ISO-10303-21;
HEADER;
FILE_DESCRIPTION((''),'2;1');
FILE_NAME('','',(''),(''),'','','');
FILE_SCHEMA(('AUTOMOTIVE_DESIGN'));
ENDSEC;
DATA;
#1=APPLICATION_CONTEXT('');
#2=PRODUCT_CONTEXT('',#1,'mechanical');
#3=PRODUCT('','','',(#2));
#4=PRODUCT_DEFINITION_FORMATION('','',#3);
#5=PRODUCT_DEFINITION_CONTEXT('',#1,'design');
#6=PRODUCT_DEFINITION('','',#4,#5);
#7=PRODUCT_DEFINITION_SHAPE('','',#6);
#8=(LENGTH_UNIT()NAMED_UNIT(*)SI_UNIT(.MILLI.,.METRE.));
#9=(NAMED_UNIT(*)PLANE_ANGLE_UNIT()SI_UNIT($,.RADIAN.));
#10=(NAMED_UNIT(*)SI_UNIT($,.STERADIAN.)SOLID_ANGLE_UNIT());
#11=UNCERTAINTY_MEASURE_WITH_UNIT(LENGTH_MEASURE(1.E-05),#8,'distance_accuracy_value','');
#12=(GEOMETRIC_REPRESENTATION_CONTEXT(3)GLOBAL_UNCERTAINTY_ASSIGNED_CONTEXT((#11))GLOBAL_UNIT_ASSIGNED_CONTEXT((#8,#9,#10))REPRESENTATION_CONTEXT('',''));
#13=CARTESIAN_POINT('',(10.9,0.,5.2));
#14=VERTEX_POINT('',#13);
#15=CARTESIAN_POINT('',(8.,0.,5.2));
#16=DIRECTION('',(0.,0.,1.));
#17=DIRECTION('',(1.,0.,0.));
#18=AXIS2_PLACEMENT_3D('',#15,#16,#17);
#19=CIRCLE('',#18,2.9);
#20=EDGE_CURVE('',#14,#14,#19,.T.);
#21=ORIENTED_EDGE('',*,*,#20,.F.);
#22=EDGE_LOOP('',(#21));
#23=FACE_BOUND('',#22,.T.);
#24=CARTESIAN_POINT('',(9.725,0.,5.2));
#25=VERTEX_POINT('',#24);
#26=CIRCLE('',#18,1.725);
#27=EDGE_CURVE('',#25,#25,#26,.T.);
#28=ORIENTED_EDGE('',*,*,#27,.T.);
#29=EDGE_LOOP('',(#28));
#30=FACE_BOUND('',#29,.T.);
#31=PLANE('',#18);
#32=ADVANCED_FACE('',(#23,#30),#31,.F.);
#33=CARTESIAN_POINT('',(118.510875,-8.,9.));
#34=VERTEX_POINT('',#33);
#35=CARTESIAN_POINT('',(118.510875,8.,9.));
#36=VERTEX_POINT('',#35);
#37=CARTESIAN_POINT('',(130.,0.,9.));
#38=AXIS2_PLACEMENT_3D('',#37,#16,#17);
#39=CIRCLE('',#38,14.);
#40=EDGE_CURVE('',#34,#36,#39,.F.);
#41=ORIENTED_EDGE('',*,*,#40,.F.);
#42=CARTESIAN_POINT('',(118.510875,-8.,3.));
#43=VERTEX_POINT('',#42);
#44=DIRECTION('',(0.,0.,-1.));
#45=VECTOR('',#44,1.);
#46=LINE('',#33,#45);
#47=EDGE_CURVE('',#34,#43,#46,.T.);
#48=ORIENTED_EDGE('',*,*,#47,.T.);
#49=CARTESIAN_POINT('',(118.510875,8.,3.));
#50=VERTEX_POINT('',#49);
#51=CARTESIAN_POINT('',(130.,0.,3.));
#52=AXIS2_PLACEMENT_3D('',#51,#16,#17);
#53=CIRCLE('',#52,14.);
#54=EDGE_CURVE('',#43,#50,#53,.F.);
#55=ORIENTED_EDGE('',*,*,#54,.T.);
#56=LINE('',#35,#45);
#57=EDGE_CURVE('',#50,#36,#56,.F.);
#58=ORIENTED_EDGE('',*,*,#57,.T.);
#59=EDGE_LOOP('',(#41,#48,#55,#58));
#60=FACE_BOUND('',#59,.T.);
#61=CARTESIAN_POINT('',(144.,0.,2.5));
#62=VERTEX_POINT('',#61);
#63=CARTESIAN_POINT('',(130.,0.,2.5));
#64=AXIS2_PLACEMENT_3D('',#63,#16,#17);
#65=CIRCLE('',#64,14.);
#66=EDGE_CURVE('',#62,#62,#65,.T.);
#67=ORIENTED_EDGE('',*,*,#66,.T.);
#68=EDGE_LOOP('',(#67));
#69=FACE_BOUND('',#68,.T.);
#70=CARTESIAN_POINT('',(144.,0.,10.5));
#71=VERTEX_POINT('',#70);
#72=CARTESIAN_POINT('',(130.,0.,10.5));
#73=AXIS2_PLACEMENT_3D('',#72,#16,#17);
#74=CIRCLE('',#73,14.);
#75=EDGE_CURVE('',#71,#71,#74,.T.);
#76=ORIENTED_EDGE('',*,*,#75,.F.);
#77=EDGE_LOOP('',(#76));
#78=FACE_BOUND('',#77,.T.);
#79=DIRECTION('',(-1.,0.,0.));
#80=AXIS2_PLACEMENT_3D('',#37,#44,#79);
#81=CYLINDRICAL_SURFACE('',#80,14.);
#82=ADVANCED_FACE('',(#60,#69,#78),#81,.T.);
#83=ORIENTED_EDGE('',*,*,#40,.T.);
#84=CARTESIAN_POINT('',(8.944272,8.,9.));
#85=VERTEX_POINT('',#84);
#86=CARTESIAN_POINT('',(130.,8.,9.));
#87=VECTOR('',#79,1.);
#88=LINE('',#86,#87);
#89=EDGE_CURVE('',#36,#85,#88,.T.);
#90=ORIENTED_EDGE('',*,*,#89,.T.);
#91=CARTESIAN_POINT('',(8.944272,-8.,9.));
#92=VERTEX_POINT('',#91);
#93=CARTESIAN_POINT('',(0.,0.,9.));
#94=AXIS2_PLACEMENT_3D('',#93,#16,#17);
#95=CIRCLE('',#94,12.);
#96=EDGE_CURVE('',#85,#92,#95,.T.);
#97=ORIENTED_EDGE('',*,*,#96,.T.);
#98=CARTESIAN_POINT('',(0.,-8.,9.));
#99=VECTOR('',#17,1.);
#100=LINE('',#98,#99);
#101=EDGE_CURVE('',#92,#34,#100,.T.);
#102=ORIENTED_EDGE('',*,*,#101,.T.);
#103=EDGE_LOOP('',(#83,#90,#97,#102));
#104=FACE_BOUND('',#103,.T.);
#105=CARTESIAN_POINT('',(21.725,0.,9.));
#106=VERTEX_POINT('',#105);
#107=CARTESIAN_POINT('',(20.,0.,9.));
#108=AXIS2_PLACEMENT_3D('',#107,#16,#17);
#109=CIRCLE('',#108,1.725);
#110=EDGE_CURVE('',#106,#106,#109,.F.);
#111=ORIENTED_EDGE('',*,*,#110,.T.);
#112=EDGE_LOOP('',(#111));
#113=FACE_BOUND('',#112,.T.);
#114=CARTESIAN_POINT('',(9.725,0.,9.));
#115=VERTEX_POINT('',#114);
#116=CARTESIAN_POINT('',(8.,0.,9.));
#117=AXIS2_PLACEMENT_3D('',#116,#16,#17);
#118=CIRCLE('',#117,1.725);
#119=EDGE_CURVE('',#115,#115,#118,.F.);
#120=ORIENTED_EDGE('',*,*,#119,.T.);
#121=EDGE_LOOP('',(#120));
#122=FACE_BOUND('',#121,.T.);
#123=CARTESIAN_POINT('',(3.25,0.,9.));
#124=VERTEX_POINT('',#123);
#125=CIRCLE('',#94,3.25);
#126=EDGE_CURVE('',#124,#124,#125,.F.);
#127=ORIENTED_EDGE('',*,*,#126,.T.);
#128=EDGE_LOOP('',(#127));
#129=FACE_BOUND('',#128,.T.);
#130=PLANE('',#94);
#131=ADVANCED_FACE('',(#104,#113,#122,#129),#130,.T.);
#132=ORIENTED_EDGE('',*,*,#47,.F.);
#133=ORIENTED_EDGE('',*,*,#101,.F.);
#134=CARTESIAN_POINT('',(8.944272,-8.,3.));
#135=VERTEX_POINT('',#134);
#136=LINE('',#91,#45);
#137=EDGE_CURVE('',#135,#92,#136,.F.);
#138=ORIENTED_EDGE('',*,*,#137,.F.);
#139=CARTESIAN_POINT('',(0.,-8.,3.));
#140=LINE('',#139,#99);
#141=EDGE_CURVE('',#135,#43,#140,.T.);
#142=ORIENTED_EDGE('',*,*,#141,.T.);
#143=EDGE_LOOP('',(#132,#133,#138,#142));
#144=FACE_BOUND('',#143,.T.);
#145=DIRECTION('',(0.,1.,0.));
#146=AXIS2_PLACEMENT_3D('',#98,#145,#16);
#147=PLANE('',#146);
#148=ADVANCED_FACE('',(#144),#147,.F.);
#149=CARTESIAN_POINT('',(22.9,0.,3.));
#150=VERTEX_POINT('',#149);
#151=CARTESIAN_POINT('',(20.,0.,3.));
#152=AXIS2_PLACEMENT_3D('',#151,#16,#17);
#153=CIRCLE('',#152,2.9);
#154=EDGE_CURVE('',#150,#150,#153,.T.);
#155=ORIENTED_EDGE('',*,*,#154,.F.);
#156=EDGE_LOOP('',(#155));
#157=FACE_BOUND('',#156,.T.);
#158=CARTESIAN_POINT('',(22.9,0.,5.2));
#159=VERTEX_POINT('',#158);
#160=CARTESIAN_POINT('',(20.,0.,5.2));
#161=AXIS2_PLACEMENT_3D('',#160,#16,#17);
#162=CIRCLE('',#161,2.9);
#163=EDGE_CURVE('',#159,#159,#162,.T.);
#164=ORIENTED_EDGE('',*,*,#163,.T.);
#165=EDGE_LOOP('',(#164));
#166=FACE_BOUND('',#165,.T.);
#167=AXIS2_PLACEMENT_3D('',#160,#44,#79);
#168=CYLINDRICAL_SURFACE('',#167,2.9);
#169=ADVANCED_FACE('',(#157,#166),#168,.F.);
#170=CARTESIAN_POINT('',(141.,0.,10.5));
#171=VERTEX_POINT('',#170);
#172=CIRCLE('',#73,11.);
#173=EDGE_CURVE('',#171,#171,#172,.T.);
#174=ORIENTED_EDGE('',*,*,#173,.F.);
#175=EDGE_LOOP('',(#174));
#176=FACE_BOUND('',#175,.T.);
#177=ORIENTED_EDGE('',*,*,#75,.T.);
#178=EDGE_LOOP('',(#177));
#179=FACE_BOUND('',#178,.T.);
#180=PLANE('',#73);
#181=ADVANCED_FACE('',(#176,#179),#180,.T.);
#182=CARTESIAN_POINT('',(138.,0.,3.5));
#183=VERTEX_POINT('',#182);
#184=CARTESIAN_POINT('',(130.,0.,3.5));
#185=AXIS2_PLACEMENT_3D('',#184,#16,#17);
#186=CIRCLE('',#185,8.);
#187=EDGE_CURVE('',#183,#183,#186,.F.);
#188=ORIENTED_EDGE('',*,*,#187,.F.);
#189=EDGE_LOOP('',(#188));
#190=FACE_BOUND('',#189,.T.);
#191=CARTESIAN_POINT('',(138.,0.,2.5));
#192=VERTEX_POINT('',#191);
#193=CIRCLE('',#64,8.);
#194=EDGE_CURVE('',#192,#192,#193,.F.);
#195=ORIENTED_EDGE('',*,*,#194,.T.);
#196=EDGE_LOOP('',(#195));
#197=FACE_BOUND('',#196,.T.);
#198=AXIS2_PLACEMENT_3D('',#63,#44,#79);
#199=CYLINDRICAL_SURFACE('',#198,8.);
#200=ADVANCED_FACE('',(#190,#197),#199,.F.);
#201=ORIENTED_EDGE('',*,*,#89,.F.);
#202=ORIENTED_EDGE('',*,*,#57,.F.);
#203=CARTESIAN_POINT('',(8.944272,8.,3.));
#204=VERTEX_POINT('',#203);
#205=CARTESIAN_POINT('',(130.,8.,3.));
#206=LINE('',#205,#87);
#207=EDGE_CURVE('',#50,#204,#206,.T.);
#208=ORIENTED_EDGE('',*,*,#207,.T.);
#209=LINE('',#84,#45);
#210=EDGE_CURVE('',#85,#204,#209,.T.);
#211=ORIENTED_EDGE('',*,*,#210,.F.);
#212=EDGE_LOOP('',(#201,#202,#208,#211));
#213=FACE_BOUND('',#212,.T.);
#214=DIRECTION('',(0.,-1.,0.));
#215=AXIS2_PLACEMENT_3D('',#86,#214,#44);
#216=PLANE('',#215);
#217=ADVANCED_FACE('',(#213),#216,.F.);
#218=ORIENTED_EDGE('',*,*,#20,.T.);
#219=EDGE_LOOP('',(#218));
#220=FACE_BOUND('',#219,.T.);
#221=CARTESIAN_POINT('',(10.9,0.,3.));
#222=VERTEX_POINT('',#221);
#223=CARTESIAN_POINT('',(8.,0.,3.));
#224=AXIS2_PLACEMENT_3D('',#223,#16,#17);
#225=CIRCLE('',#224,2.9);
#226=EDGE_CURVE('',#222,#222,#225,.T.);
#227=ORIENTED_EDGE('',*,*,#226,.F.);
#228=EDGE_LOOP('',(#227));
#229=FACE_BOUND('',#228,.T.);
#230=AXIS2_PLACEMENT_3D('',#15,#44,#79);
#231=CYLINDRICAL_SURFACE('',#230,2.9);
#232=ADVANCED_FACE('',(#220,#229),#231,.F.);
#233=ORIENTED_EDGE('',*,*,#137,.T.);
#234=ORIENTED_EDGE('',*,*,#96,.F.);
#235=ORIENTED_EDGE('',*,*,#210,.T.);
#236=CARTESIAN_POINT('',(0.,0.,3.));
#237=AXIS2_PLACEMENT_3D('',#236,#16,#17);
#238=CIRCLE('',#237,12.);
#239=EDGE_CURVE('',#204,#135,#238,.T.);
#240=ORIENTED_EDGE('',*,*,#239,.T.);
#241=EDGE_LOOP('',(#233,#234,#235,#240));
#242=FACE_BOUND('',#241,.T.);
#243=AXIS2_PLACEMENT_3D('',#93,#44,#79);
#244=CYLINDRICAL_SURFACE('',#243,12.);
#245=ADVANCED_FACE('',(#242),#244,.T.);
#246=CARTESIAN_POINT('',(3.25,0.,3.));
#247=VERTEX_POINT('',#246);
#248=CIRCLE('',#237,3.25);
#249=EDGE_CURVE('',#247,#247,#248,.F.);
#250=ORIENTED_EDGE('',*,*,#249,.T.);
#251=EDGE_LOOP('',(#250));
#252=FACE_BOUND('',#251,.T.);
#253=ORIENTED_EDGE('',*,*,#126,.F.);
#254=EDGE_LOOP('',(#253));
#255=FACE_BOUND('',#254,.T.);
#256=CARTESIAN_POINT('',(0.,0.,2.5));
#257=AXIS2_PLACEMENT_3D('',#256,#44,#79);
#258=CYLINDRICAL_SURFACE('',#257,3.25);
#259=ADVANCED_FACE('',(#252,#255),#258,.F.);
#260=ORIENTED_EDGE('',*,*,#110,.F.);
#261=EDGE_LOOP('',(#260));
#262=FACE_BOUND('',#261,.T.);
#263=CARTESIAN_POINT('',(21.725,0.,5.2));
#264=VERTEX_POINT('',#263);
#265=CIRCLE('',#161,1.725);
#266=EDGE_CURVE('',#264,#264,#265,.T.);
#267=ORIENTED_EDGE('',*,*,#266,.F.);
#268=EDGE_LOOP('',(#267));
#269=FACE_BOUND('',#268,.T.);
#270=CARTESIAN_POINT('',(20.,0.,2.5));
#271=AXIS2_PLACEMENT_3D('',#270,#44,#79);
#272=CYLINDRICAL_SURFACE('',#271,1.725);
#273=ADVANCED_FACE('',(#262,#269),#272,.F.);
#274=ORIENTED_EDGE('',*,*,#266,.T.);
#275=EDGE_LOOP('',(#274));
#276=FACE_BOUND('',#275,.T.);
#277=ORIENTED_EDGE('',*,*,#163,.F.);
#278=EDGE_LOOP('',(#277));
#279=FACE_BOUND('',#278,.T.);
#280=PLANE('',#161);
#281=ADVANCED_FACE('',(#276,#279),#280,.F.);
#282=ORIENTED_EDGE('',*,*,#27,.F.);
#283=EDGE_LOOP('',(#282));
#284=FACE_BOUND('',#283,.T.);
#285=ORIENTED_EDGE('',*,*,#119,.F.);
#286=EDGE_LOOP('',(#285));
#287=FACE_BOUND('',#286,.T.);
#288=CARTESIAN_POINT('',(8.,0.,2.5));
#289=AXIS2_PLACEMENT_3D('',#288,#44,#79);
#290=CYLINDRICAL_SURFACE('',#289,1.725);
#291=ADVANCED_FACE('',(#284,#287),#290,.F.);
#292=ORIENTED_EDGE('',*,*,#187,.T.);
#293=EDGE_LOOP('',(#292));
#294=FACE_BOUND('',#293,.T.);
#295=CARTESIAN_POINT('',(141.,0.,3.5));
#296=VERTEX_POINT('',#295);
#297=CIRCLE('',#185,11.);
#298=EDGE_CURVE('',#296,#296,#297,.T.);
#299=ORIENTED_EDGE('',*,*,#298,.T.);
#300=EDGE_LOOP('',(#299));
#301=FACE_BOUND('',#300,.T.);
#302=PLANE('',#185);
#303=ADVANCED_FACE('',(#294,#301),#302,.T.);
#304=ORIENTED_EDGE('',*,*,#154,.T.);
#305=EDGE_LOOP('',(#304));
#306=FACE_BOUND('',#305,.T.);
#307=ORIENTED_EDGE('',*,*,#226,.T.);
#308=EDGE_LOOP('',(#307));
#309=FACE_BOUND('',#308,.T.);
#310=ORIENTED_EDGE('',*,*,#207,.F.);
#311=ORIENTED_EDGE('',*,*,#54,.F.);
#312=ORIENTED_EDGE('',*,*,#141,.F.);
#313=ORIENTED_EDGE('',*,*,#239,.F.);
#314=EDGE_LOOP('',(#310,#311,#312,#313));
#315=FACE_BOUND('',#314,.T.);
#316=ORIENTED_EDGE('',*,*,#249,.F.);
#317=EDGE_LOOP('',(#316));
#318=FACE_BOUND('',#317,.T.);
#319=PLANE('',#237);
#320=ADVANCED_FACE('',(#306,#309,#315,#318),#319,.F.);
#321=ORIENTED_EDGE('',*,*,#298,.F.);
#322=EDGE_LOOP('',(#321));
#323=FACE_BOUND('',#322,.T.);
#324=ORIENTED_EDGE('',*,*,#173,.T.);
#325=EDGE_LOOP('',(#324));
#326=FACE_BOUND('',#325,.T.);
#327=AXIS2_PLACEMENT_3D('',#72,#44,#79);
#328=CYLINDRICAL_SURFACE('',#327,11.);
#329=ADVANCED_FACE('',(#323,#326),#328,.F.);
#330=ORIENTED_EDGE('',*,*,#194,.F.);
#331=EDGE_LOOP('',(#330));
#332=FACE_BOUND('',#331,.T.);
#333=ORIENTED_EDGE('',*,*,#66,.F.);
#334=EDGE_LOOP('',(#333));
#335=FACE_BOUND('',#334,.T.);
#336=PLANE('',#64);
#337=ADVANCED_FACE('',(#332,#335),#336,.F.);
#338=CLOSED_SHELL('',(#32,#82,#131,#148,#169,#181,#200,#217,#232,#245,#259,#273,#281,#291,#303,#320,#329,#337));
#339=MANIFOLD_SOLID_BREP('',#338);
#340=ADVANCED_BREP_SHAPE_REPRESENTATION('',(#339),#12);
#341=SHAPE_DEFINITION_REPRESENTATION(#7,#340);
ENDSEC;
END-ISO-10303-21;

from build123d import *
from build123d.topology import SkipClean

# Parameters (mm, degrees)
BOSS_EXTRUDE1_START     = 3
SKETCH1_W               = 130
SKETCH1_H               = 16
BOSS_EXTRUDE1_DEPTH     = 6
BOSS_EXTRUDE2_START     = 3
SKETCH2_R               = 12
BOSS_EXTRUDE2_DEPTH     = 6
BOSS_EXTRUDE3_START     = 3
SKETCH3_R               = 14
BOSS_EXTRUDE3_DEPTH     = 6
BOSS_EXTRUDE4_START     = 2.5
SKETCH4_R               = 14
BOSS_EXTRUDE4_DEPTH     = 8
CUT_EXTRUDE1_DEPTH      = 146.059470563
CUT_EXTRUDE1_DEPTH_BACK = 146.059470563
SKETCH5_R               = 3.25
CUT_EXTRUDE2_DEPTH      = 146.059470563
CUT_EXTRUDE2_DEPTH_BACK = 146.059470563
SKETCH6_R               = 1.725
CUT_EXTRUDE3_START      = 3
SKETCH7_R               = 2.9
CUT_EXTRUDE3_DEPTH      = 2.2
CUT_EXTRUDE4_START      = 3
SKETCH8_R               = 2.9
CUT_EXTRUDE4_DEPTH      = 2.2
CUT_EXTRUDE5_START      = 3.5
SKETCH9_R               = 11
CUT_EXTRUDE5_DEPTH      = 7
CUT_EXTRUDE6_DEPTH      = 146.059470563
CUT_EXTRUDE6_DEPTH_BACK = 146.059470563
SKETCH10_R              = 8


with BuildPart() as part:
    # Sketch1 → Boss-Extrude1 (new body)
    with BuildSketch(Plane.XY.offset(BOSS_EXTRUDE1_START)):
        with Locations((65, 0)):
            Rectangle(SKETCH1_W, SKETCH1_H)
    extrude(amount=BOSS_EXTRUDE1_DEPTH)

    # Sketch2 → Boss-Extrude2 (add)
    with BuildSketch(Plane.XY.offset(BOSS_EXTRUDE2_START)):
        Circle(SKETCH2_R)
    extrude(amount=BOSS_EXTRUDE2_DEPTH)

    # Sketch3 → Boss-Extrude3 (add)
    with BuildSketch(Plane.XY.offset(BOSS_EXTRUDE3_START)):
        with Locations((130, 0)):
            Circle(SKETCH3_R)
    extrude(amount=BOSS_EXTRUDE3_DEPTH)

    # Sketch4 → Boss-Extrude4 (add)
    with SkipClean():  # the faces are left unmerged after this step: merging them gives an invalid solid
        with BuildSketch(Plane.XY.offset(BOSS_EXTRUDE4_START)):
            with Locations((130, 0)):
                Circle(SKETCH4_R)
        extrude(amount=BOSS_EXTRUDE4_DEPTH)
    add(part.part.scale(1), mode=Mode.REPLACE)  # the faces are merged on a copy

    # Sketch5 → Cut-Extrude1 (cut, two sides: drawn at the far end of the back side and taken through both)
    with BuildSketch(Plane.XY.offset(-CUT_EXTRUDE1_DEPTH_BACK)):
        Circle(SKETCH5_R)
    extrude(amount=CUT_EXTRUDE1_DEPTH + CUT_EXTRUDE1_DEPTH_BACK, mode=Mode.SUBTRACT)

    # Sketch6 → Cut-Extrude2 (cut, two sides: drawn at the far end of the back side and taken through both)
    with BuildSketch(Plane.XY.offset(-CUT_EXTRUDE2_DEPTH_BACK)):
        with Locations((8, 0)):
            Circle(SKETCH6_R)
        with Locations((20, 0)):
            Circle(SKETCH6_R)
    extrude(amount=CUT_EXTRUDE2_DEPTH + CUT_EXTRUDE2_DEPTH_BACK, mode=Mode.SUBTRACT)

    # Sketch7 → Cut-Extrude3 (cut)
    with BuildSketch(Plane.XY.offset(CUT_EXTRUDE3_START)):
        with Locations((8, 0)):
            Circle(SKETCH7_R)
    extrude(amount=CUT_EXTRUDE3_DEPTH, mode=Mode.SUBTRACT)

    # Sketch8 → Cut-Extrude4 (cut)
    with BuildSketch(Plane.XY.offset(CUT_EXTRUDE4_START)):
        with Locations((20, 0)):
            Circle(SKETCH8_R)
    extrude(amount=CUT_EXTRUDE4_DEPTH, mode=Mode.SUBTRACT)

    # Sketch9 → Cut-Extrude5 (cut)
    with BuildSketch(Plane.XY.offset(CUT_EXTRUDE5_START)):
        with Locations((130, 0)):
            Circle(SKETCH9_R)
    extrude(amount=CUT_EXTRUDE5_DEPTH, mode=Mode.SUBTRACT)

    # Sketch10 → Cut-Extrude6 (cut, two sides: drawn at the far end of the back side and taken through both)
    with BuildSketch(Plane.XY.offset(-CUT_EXTRUDE6_DEPTH_BACK)):
        with Locations((130, 0)):
            Circle(SKETCH10_R)
    extrude(amount=CUT_EXTRUDE6_DEPTH + CUT_EXTRUDE6_DEPTH_BACK, mode=Mode.SUBTRACT)


solid = part.part
